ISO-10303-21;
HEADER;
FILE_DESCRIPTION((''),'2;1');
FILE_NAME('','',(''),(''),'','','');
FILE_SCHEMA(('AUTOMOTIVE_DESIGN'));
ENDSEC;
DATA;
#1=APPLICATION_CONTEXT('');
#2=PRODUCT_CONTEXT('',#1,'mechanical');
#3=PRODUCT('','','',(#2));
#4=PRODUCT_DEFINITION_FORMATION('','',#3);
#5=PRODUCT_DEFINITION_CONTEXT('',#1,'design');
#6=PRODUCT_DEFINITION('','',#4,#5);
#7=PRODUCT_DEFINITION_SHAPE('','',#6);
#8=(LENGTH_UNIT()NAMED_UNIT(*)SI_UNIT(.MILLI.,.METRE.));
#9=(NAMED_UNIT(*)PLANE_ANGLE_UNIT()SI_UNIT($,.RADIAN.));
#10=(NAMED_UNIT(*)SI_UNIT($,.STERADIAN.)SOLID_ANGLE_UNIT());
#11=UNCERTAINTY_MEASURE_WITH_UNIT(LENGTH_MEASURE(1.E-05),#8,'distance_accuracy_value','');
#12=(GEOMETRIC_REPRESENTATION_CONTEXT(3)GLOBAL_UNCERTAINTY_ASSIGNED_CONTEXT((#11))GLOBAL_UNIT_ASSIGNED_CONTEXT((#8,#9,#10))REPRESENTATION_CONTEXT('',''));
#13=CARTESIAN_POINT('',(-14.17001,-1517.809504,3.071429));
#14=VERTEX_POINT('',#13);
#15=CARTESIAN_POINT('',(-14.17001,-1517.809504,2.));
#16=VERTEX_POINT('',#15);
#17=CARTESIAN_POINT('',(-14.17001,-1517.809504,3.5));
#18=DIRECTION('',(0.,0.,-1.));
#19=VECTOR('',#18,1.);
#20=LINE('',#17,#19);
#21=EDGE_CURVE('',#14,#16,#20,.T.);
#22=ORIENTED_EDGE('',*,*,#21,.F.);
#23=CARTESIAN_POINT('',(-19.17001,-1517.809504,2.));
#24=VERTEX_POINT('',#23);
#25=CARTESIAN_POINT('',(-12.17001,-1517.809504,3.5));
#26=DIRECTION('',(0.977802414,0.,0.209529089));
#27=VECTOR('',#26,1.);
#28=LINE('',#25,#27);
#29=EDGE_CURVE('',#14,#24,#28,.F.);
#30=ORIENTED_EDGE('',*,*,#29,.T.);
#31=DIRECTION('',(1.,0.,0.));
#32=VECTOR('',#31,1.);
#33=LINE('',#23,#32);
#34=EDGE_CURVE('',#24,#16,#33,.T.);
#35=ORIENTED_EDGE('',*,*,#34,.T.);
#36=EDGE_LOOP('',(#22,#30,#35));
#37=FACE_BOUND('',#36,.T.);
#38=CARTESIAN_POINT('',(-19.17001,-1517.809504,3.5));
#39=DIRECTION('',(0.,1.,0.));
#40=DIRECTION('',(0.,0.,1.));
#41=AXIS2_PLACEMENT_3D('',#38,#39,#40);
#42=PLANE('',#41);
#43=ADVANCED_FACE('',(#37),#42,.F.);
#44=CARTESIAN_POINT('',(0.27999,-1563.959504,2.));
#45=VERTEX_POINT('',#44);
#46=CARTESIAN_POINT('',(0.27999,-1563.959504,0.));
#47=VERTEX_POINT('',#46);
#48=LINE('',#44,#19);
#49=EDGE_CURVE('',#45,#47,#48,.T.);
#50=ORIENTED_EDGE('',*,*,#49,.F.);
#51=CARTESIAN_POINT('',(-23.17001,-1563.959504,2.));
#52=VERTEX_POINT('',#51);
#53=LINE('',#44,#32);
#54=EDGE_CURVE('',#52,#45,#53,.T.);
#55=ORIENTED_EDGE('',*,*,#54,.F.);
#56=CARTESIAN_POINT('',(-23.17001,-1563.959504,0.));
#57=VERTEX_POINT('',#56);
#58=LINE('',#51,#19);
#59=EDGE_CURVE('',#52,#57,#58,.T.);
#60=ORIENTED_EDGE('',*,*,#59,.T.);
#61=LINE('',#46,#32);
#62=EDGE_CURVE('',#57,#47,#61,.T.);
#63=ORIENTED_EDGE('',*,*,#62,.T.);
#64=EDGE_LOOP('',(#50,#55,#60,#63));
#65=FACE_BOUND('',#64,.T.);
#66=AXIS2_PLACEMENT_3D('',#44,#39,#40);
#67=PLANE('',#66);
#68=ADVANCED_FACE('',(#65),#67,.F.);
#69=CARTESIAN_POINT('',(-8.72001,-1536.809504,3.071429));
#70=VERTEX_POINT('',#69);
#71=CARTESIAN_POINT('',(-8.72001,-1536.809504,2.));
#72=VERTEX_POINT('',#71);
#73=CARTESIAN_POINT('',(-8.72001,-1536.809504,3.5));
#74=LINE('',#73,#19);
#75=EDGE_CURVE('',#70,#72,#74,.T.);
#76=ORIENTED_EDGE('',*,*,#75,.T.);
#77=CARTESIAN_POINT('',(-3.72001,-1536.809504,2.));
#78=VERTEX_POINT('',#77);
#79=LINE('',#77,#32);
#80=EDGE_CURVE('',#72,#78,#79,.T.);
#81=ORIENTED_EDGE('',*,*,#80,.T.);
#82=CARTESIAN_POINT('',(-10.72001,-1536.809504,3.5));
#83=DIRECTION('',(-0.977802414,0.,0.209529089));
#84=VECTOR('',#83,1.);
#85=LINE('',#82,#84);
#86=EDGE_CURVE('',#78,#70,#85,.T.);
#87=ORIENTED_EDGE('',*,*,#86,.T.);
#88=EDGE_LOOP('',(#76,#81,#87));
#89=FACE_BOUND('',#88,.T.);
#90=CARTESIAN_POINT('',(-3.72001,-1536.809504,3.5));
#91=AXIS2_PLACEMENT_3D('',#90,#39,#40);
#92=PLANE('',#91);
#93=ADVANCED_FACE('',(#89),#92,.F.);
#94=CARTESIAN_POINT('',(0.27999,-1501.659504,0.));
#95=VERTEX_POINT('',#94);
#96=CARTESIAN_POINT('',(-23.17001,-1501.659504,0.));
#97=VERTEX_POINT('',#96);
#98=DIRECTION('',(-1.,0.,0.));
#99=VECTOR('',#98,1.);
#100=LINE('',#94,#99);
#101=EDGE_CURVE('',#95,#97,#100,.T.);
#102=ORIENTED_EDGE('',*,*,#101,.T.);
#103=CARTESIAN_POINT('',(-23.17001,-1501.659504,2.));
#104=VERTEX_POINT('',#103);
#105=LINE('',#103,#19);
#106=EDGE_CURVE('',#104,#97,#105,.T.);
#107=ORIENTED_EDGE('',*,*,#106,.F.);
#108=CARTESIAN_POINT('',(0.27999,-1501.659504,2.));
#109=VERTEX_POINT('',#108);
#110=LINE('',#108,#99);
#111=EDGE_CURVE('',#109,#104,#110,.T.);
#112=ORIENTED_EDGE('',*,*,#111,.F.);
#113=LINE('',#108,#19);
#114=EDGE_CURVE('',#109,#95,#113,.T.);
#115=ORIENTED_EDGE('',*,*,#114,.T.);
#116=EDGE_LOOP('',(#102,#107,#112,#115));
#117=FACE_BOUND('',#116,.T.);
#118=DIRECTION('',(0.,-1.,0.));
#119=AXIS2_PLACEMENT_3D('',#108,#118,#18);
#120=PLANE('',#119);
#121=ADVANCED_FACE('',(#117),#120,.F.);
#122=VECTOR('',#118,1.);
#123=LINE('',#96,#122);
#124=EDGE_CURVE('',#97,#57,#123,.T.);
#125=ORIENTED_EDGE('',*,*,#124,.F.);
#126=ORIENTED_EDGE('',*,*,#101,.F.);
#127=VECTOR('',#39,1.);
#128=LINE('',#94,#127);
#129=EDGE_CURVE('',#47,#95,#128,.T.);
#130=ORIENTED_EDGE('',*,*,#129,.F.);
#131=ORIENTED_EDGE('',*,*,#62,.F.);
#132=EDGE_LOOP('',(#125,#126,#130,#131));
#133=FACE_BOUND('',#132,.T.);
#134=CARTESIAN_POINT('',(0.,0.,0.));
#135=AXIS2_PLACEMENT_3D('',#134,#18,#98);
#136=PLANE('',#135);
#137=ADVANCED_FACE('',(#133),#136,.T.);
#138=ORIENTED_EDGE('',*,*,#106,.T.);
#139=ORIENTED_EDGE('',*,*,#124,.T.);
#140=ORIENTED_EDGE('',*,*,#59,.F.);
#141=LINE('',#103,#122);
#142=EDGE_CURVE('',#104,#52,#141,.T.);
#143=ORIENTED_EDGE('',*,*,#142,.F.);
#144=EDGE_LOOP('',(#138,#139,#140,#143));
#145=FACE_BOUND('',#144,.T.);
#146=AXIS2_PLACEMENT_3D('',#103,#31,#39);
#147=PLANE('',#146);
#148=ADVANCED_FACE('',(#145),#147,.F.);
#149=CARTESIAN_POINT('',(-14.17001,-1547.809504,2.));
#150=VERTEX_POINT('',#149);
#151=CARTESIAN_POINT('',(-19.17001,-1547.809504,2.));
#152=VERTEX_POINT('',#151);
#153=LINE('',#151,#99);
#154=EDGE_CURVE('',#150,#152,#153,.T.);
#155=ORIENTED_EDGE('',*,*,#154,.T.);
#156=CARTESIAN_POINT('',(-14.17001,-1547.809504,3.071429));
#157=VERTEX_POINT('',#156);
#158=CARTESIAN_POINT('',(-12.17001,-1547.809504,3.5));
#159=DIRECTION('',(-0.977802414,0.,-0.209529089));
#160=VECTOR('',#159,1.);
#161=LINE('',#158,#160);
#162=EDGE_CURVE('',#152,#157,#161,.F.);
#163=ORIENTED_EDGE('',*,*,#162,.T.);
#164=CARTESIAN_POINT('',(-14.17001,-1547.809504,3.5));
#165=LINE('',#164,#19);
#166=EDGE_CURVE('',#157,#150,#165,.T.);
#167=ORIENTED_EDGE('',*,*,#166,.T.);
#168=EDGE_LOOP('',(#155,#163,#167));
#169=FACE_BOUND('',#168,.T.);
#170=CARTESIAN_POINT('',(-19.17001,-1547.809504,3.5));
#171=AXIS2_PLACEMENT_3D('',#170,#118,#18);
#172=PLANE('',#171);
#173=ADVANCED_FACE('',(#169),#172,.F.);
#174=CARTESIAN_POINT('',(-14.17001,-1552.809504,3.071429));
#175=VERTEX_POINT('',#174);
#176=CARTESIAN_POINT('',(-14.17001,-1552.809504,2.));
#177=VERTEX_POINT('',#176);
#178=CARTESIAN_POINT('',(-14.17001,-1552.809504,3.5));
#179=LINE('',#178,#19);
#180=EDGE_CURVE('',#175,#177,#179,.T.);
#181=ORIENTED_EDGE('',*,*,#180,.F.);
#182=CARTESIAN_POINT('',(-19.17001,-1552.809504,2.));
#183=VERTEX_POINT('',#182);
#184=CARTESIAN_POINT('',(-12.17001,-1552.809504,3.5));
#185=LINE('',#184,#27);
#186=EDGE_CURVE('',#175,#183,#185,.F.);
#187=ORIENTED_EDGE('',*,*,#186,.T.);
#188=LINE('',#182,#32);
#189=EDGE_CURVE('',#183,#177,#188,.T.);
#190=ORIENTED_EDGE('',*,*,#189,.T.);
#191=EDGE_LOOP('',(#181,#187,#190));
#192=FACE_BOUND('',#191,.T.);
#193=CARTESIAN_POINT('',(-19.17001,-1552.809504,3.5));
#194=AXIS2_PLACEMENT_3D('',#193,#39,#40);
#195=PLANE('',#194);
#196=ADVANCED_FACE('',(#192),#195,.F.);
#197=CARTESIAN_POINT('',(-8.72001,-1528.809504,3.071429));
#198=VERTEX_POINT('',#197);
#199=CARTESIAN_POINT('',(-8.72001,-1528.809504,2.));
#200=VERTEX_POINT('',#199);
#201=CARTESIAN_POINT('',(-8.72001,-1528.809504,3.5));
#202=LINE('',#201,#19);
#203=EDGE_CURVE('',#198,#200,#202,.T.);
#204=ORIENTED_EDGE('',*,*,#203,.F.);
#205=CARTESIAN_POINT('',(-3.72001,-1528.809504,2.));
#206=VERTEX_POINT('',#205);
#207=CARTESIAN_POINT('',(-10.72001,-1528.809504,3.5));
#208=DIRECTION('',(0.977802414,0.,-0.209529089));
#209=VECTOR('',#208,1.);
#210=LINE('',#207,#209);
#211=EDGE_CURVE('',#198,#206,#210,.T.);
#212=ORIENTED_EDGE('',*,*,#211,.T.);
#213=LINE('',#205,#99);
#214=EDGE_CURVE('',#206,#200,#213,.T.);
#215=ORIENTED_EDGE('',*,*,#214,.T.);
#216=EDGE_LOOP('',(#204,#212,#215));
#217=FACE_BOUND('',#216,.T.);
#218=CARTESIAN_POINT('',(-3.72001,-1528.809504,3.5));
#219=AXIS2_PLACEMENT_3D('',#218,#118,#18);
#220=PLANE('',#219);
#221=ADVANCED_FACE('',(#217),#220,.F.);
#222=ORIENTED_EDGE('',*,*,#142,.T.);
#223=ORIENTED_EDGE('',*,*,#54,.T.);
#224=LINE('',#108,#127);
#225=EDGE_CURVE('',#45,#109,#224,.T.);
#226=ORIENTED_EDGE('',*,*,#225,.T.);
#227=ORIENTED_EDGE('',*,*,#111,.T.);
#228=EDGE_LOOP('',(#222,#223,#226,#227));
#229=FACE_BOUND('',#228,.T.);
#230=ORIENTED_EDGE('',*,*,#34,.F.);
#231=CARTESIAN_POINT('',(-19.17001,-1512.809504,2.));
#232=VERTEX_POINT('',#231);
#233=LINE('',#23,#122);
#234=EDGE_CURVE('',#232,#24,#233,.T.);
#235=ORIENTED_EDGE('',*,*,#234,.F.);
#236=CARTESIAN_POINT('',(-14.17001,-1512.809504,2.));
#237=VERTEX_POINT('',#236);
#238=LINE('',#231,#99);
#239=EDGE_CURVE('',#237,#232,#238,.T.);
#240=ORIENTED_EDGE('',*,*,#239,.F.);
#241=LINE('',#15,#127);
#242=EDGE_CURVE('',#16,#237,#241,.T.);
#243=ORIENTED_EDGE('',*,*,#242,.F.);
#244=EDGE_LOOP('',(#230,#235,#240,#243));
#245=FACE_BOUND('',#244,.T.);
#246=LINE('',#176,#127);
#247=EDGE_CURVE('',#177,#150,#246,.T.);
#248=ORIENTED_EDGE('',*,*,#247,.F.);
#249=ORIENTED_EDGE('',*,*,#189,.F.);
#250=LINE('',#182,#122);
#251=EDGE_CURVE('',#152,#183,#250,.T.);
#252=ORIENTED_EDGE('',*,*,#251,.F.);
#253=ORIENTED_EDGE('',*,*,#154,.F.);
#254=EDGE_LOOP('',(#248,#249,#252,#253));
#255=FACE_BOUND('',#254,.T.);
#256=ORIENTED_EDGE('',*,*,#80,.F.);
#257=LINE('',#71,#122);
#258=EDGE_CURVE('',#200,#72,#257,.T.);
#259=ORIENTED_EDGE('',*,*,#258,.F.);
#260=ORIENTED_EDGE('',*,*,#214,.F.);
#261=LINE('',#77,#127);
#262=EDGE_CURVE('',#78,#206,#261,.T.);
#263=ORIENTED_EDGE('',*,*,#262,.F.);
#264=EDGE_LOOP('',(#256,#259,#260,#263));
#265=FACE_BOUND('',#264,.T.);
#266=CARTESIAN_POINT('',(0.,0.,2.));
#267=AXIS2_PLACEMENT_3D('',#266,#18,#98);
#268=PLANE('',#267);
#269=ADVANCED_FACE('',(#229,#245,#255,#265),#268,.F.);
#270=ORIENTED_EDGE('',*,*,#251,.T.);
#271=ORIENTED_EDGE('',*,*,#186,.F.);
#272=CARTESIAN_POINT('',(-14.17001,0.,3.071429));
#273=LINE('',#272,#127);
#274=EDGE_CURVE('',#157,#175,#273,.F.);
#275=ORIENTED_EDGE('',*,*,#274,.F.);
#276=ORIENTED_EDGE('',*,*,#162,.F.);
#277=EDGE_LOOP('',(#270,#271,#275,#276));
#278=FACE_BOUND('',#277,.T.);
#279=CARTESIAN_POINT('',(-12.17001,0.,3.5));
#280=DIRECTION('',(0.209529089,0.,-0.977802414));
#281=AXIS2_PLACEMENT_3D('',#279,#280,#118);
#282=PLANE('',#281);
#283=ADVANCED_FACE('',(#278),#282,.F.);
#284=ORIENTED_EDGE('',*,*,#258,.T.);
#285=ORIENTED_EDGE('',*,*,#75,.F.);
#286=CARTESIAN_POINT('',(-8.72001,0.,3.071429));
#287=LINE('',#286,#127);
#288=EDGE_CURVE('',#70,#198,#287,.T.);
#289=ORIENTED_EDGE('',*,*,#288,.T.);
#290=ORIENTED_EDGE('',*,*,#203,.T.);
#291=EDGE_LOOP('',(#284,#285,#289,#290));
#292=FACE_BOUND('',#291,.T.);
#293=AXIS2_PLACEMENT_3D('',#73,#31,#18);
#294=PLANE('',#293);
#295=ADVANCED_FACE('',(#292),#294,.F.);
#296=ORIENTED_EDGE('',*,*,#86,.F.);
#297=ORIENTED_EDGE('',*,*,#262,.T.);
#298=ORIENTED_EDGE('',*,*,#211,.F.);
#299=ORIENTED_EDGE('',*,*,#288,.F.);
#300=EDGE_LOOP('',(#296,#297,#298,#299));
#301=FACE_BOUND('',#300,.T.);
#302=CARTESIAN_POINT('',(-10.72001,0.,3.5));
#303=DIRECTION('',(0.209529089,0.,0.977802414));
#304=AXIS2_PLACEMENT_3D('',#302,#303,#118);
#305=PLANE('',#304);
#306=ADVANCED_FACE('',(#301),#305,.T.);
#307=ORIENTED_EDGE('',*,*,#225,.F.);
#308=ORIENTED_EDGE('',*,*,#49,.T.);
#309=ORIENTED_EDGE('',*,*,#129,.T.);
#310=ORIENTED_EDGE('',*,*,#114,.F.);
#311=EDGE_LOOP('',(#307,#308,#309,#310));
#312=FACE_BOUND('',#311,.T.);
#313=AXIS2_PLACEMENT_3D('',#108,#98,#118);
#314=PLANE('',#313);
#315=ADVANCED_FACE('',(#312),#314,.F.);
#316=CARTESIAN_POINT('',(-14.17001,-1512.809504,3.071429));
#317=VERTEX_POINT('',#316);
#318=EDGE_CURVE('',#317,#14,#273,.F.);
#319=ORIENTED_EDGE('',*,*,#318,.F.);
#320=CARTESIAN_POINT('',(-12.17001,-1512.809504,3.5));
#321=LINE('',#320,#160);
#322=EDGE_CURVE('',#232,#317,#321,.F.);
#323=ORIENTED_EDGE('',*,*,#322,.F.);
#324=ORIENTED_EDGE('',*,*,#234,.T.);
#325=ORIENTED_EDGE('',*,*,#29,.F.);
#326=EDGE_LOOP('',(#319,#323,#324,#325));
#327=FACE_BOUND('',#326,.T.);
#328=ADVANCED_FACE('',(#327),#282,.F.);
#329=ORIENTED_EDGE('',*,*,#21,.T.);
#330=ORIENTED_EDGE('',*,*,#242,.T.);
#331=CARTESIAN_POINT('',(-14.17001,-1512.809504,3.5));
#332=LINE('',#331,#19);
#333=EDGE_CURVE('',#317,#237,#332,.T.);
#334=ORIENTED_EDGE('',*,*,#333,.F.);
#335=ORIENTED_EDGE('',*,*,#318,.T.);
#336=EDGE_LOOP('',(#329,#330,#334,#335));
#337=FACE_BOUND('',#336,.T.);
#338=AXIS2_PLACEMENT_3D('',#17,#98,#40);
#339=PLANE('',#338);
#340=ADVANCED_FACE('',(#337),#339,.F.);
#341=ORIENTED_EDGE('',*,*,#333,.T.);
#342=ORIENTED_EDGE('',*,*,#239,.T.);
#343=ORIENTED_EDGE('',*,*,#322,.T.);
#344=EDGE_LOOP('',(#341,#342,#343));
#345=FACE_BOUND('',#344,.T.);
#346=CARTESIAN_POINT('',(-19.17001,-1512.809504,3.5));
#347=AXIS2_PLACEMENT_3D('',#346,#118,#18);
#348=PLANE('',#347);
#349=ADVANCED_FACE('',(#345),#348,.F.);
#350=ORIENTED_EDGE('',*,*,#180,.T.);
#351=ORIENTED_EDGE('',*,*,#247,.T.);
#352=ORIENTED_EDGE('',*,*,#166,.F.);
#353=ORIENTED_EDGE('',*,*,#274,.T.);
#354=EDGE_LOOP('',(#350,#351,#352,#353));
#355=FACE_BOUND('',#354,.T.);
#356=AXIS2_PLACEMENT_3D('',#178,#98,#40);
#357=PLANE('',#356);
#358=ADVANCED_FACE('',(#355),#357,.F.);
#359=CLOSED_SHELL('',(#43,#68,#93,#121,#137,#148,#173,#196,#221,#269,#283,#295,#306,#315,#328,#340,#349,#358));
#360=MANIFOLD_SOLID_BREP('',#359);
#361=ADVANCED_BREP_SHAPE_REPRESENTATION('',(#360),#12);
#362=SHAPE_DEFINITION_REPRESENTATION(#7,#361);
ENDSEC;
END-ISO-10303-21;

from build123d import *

# Parameters (mm, degrees)
SKETCH_1_W       = 23.45
SKETCH_1_H       = 62.3
EXTRUDE_1_DEPTH  = 2
SKETCH_2_W       = 5
SKETCH_2_H       = 5
SKETCH_2_H_2     = 8
EXTRUDE_2_DEPTH  = 1.5
CHAMFER_1_SIZE   = 1.5
CHAMFER_1_SIZE_2 = 7


with BuildPart() as part:
    # Эскиз1 → Бобышка-Вытянуть1 (new body)
    with BuildSketch(Plane.XY):
        with Locations((-11.445010077, -1532.80950355)):
            Rectangle(SKETCH_1_W, SKETCH_1_H)
    extrude(amount=EXTRUDE_1_DEPTH)

    # Эскиз2 → Бобышка-Вытянуть2 (add)
    with BuildSketch(Plane.XY.offset(2)):
        with Locations((-16.670010077, -1550.30950355)):
            Rectangle(SKETCH_2_W, SKETCH_2_H)
        with Locations((-6.220010077, -1532.80950355)):
            Rectangle(SKETCH_2_W, SKETCH_2_H_2)
        with Locations((-16.670010077, -1515.30950355)):
            Rectangle(SKETCH_2_W, SKETCH_2_H)
    extrude(amount=EXTRUDE_2_DEPTH)

    # Фаска1
    # the kernel refuses this chamfer: 7, 1.5 mm, written as the material it takes off along each edge
    with BuildSketch(Plane(origin=(-19.170010077, -1494.624450371, 3.5), x_dir=(-0.1730043027235695, 0, -0.9849210685324644), z_dir=(0, -1, 0))) as chamfer_1_piece_1_section:
        Polygon((CHAMFER_1_SIZE * 0.984921068532, CHAMFER_1_SIZE * 0.173004302724), (-CHAMFER_1_SIZE_2 * 0.173004302724, CHAMFER_1_SIZE_2 * 0.984921068532), (0, 0), align=None)
    chamfer_1_piece_1 = extrude(amount=41.370106359, mode=Mode.PRIVATE)
    chamfer_1_piece_1 = split(chamfer_1_piece_1, bisect_by=Plane(origin=(-16.689828283, -1515.30950355, 2), z_dir=(0, 0, 1)), keep=Keep.TOP, mode=Mode.PRIVATE)
    add(chamfer_1_piece_1, mode=Mode.SUBTRACT)
    with BuildSketch(Plane(origin=(-3.720010077, -1510.624450371, 3.5), x_dir=(0.17300430272357034, 0, -0.9849210685324644), z_dir=(0, -1, 0))) as chamfer_1_piece_2_section:
        Polygon((CHAMFER_1_SIZE * 0.984921068532, -CHAMFER_1_SIZE * 0.173004302724), (-CHAMFER_1_SIZE_2 * 0.173004302724, -CHAMFER_1_SIZE_2 * 0.984921068532), (0, 0), align=None)
    chamfer_1_piece_2 = extrude(amount=44.370106359, mode=Mode.PRIVATE)
    chamfer_1_piece_2 = split(chamfer_1_piece_2, bisect_by=Plane(origin=(-6.200191872, -1532.80950355, 2), z_dir=(0, 0, 1)), keep=Keep.TOP, mode=Mode.PRIVATE)
    add(chamfer_1_piece_2, mode=Mode.SUBTRACT)
    with BuildSketch(Plane(origin=(-19.170010077, -1529.624450371, 3.5), x_dir=(-0.1730043027235695, 0, -0.9849210685324644), z_dir=(0, -1, 0))) as chamfer_1_piece_3_section:
        Polygon((CHAMFER_1_SIZE * 0.984921068532, CHAMFER_1_SIZE * 0.173004302724), (-CHAMFER_1_SIZE_2 * 0.173004302724, CHAMFER_1_SIZE_2 * 0.984921068532), (0, 0), align=None)
    chamfer_1_piece_3 = extrude(amount=41.370106359, mode=Mode.PRIVATE)
    chamfer_1_piece_3 = split(chamfer_1_piece_3, bisect_by=Plane(origin=(-16.689828283, -1550.30950355, 2), z_dir=(0, 0, 1)), keep=Keep.TOP, mode=Mode.PRIVATE)
    add(chamfer_1_piece_3, mode=Mode.SUBTRACT)


solid = part.part
